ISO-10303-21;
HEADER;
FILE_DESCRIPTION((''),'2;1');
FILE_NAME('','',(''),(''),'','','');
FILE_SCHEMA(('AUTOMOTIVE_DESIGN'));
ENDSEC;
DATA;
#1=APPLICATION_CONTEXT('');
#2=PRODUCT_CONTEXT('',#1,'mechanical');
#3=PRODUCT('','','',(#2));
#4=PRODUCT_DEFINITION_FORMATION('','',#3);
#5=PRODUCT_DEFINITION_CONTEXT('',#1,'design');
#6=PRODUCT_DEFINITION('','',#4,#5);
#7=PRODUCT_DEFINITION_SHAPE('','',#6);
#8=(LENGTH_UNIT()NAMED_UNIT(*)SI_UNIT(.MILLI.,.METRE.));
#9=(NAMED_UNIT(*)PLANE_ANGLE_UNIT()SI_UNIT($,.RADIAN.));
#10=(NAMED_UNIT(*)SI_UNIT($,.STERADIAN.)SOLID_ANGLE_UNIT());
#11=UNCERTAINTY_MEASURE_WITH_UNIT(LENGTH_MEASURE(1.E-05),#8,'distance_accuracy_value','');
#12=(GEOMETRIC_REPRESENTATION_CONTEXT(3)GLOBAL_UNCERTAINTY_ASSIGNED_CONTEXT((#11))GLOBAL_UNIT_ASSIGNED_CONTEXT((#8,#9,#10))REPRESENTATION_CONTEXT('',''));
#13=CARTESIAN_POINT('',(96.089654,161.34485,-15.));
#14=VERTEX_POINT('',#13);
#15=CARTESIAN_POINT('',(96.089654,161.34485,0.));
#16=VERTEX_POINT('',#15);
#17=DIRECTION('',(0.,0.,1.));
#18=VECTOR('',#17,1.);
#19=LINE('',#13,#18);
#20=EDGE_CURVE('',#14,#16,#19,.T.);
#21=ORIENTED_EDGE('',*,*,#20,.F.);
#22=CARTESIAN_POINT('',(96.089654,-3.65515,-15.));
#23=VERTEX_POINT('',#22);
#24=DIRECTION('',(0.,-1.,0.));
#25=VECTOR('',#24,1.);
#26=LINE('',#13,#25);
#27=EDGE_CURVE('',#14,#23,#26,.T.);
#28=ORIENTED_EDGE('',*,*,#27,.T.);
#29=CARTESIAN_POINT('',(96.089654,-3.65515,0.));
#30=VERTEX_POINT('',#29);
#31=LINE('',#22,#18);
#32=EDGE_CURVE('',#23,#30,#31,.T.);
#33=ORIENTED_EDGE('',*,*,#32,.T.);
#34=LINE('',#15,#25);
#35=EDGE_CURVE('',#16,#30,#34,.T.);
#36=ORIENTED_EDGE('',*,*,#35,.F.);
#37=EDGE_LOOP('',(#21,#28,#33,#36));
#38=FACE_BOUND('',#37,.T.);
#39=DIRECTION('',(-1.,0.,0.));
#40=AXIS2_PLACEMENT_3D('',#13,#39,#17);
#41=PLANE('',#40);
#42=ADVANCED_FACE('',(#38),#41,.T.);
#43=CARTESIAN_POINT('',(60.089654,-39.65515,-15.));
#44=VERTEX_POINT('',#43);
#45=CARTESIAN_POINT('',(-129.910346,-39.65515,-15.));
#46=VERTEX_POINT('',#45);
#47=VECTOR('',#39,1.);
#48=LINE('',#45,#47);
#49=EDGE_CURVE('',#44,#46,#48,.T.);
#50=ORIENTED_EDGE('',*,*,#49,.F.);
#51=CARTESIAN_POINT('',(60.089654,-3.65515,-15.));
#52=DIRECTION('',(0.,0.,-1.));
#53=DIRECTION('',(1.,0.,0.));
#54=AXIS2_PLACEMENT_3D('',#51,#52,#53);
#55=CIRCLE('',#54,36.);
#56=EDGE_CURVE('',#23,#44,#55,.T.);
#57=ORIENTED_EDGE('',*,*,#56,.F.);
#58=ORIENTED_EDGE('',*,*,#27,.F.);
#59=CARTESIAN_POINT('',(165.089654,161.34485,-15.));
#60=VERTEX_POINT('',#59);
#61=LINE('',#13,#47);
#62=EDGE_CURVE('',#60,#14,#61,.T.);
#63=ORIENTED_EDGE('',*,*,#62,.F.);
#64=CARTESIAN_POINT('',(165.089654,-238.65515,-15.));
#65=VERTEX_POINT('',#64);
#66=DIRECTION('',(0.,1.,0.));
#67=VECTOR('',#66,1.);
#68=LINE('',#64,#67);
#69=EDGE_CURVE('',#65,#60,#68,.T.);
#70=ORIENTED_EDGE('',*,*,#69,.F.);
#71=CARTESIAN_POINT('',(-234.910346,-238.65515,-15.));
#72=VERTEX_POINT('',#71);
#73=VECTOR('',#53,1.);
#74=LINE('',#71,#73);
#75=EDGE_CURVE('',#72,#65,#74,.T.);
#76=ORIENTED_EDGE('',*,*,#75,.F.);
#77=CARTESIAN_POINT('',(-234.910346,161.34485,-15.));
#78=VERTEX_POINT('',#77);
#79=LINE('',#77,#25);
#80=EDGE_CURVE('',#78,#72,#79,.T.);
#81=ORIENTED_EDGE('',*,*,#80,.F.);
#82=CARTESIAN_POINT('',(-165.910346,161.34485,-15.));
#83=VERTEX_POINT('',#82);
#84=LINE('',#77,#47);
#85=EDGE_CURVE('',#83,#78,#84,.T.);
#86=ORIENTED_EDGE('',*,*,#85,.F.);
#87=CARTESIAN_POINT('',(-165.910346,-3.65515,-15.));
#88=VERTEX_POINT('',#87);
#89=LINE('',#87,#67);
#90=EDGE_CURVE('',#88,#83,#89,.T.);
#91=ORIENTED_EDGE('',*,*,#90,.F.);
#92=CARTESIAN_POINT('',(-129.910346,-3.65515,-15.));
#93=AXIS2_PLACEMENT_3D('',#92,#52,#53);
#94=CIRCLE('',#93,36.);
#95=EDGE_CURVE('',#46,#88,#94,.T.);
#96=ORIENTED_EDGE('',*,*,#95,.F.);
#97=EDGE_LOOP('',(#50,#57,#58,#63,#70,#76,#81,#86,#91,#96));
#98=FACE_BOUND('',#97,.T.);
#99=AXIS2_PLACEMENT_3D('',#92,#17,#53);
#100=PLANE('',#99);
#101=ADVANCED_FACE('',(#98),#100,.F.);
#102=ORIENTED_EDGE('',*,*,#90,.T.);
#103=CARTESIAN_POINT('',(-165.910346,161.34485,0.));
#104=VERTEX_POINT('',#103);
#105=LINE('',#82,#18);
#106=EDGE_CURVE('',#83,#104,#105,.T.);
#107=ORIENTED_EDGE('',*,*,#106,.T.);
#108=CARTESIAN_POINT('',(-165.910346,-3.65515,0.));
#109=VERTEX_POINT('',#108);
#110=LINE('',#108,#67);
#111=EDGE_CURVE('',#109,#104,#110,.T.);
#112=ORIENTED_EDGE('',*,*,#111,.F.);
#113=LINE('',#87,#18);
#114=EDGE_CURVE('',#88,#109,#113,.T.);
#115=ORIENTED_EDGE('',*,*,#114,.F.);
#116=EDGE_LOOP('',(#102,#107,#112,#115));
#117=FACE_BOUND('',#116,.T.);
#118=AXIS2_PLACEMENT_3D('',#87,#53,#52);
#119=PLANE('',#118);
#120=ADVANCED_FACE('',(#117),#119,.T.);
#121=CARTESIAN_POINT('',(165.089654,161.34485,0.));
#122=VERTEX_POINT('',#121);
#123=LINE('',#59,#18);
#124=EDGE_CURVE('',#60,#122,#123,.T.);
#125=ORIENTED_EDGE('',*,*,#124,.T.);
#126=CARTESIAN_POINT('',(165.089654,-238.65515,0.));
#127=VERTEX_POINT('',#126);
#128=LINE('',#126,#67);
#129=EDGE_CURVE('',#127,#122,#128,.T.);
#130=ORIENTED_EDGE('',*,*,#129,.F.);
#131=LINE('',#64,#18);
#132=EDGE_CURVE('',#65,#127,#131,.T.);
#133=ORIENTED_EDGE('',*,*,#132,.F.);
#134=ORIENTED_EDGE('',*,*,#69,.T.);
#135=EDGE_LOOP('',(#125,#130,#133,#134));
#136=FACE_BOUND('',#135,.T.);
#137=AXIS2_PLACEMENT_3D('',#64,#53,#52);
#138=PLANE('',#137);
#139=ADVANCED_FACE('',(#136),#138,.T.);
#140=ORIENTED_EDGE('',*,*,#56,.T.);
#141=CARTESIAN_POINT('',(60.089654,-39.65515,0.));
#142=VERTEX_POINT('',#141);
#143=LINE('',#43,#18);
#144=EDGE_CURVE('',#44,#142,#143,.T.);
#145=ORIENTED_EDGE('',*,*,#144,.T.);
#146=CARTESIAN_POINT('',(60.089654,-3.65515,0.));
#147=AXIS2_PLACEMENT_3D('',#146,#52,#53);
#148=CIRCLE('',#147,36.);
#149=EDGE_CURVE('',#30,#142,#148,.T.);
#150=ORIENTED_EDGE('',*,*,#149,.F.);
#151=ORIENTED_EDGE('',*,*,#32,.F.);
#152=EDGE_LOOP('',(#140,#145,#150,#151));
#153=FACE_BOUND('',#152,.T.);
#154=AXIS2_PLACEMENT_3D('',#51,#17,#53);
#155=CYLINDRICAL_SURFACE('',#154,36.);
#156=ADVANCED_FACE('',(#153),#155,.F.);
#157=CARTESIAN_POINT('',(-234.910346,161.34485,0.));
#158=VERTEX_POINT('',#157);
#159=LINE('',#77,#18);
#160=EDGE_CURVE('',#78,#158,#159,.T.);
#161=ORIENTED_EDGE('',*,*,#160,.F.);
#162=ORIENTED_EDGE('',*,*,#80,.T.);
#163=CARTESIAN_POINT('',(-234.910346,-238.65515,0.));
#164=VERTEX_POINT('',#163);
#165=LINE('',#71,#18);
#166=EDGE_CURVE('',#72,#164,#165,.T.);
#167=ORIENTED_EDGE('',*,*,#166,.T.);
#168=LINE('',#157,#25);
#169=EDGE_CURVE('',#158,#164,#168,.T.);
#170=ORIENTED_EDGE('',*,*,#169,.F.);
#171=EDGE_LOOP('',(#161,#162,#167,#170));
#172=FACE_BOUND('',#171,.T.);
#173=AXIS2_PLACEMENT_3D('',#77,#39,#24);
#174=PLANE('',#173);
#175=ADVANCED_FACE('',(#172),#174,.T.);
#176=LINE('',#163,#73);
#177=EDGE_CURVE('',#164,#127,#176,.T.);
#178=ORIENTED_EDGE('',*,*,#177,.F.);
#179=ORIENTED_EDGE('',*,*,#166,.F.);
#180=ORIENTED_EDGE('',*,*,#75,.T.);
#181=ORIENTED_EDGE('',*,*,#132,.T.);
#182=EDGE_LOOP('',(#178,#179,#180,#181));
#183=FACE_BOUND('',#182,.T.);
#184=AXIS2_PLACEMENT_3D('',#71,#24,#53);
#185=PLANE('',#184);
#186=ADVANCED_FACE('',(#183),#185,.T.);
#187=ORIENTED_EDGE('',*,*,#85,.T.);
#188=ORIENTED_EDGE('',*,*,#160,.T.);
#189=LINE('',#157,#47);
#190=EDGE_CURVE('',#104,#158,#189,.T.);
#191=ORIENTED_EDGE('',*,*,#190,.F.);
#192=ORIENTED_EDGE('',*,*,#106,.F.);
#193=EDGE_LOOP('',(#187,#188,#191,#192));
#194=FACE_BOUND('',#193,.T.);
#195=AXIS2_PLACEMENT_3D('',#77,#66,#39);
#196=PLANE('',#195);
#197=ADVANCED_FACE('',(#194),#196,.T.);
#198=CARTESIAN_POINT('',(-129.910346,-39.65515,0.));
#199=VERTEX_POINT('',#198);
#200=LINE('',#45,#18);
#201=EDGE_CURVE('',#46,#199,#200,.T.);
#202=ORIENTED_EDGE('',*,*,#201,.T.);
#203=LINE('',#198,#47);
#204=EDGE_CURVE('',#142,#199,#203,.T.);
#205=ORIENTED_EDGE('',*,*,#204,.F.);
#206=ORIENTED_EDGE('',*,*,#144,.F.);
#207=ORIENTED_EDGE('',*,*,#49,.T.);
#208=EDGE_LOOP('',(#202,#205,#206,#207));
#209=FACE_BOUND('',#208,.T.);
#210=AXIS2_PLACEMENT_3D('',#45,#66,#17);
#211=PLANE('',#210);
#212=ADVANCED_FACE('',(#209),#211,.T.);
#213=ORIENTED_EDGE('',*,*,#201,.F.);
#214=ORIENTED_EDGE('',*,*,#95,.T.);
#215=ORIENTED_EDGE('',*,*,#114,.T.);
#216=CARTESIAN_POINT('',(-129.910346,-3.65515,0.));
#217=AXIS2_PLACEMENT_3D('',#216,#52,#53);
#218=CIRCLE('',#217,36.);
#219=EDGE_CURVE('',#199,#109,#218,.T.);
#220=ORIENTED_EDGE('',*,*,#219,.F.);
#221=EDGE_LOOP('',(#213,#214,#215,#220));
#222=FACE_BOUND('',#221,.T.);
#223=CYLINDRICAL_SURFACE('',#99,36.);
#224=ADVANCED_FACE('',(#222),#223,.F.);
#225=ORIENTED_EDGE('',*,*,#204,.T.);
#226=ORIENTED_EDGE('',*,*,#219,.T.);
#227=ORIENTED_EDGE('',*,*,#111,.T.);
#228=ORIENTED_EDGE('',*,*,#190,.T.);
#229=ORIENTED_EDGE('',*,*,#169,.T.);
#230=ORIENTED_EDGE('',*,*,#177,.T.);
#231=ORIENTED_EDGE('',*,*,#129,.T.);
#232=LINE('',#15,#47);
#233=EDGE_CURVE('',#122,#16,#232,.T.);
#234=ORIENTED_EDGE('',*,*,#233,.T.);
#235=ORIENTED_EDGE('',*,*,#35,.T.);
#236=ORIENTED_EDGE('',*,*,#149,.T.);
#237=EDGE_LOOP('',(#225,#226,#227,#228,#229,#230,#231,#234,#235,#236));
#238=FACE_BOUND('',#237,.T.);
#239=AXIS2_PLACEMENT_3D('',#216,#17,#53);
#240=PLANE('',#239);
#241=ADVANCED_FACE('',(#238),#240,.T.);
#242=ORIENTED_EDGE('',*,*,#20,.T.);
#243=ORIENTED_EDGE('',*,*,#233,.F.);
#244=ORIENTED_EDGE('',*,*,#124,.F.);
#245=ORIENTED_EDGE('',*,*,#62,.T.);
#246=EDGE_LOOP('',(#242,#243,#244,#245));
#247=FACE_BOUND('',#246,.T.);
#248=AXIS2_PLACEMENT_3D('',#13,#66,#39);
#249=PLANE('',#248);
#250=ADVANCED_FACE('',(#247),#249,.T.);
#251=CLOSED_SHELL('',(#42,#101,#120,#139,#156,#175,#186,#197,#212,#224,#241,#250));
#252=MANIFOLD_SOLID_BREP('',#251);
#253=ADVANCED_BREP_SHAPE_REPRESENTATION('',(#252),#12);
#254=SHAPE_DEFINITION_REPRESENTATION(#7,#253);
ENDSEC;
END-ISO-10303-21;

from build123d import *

# Parameters (mm, degrees)
TABAN_FLAN_1_DEPTH = 15


# Sheet-metal steps are written as plain solids
with BuildPart() as part:
    # Çizim1 → Taban-Flanş1 (new body)
    with BuildSketch(Plane.XY):
        with BuildLine():
            Line((-234.910345825, 161.344850299), (-234.910345825, -238.655149701))
            Line((-234.910345825, -238.655149701), (165.089654175, -238.655149701))
            Line((165.089654175, -238.655149701), (165.089654175, 161.344850299))
            Line((165.089654175, 161.344850299), (96.089654175, 161.344850299))
            Line((96.089654175, 161.344850299), (96.089654175, -3.655149701))
            ThreePointArc((96.089654175, -3.655149701), (85.545498298, -29.110993823), (60.089654175, -39.655149701))
            Line((60.089654175, -39.655149701), (-129.910345825, -39.655149701))
            ThreePointArc((-129.910345825, -39.655149701), (-155.366189948, -29.110993823), (-165.910345825, -3.655149701))
            Line((-165.910345825, -3.655149701), (-165.910345825, 161.344850299))
            Line((-165.910345825, 161.344850299), (-234.910345825, 161.344850299))
        make_face()
    extrude(amount=-TABAN_FLAN_1_DEPTH)


solid = part.part
